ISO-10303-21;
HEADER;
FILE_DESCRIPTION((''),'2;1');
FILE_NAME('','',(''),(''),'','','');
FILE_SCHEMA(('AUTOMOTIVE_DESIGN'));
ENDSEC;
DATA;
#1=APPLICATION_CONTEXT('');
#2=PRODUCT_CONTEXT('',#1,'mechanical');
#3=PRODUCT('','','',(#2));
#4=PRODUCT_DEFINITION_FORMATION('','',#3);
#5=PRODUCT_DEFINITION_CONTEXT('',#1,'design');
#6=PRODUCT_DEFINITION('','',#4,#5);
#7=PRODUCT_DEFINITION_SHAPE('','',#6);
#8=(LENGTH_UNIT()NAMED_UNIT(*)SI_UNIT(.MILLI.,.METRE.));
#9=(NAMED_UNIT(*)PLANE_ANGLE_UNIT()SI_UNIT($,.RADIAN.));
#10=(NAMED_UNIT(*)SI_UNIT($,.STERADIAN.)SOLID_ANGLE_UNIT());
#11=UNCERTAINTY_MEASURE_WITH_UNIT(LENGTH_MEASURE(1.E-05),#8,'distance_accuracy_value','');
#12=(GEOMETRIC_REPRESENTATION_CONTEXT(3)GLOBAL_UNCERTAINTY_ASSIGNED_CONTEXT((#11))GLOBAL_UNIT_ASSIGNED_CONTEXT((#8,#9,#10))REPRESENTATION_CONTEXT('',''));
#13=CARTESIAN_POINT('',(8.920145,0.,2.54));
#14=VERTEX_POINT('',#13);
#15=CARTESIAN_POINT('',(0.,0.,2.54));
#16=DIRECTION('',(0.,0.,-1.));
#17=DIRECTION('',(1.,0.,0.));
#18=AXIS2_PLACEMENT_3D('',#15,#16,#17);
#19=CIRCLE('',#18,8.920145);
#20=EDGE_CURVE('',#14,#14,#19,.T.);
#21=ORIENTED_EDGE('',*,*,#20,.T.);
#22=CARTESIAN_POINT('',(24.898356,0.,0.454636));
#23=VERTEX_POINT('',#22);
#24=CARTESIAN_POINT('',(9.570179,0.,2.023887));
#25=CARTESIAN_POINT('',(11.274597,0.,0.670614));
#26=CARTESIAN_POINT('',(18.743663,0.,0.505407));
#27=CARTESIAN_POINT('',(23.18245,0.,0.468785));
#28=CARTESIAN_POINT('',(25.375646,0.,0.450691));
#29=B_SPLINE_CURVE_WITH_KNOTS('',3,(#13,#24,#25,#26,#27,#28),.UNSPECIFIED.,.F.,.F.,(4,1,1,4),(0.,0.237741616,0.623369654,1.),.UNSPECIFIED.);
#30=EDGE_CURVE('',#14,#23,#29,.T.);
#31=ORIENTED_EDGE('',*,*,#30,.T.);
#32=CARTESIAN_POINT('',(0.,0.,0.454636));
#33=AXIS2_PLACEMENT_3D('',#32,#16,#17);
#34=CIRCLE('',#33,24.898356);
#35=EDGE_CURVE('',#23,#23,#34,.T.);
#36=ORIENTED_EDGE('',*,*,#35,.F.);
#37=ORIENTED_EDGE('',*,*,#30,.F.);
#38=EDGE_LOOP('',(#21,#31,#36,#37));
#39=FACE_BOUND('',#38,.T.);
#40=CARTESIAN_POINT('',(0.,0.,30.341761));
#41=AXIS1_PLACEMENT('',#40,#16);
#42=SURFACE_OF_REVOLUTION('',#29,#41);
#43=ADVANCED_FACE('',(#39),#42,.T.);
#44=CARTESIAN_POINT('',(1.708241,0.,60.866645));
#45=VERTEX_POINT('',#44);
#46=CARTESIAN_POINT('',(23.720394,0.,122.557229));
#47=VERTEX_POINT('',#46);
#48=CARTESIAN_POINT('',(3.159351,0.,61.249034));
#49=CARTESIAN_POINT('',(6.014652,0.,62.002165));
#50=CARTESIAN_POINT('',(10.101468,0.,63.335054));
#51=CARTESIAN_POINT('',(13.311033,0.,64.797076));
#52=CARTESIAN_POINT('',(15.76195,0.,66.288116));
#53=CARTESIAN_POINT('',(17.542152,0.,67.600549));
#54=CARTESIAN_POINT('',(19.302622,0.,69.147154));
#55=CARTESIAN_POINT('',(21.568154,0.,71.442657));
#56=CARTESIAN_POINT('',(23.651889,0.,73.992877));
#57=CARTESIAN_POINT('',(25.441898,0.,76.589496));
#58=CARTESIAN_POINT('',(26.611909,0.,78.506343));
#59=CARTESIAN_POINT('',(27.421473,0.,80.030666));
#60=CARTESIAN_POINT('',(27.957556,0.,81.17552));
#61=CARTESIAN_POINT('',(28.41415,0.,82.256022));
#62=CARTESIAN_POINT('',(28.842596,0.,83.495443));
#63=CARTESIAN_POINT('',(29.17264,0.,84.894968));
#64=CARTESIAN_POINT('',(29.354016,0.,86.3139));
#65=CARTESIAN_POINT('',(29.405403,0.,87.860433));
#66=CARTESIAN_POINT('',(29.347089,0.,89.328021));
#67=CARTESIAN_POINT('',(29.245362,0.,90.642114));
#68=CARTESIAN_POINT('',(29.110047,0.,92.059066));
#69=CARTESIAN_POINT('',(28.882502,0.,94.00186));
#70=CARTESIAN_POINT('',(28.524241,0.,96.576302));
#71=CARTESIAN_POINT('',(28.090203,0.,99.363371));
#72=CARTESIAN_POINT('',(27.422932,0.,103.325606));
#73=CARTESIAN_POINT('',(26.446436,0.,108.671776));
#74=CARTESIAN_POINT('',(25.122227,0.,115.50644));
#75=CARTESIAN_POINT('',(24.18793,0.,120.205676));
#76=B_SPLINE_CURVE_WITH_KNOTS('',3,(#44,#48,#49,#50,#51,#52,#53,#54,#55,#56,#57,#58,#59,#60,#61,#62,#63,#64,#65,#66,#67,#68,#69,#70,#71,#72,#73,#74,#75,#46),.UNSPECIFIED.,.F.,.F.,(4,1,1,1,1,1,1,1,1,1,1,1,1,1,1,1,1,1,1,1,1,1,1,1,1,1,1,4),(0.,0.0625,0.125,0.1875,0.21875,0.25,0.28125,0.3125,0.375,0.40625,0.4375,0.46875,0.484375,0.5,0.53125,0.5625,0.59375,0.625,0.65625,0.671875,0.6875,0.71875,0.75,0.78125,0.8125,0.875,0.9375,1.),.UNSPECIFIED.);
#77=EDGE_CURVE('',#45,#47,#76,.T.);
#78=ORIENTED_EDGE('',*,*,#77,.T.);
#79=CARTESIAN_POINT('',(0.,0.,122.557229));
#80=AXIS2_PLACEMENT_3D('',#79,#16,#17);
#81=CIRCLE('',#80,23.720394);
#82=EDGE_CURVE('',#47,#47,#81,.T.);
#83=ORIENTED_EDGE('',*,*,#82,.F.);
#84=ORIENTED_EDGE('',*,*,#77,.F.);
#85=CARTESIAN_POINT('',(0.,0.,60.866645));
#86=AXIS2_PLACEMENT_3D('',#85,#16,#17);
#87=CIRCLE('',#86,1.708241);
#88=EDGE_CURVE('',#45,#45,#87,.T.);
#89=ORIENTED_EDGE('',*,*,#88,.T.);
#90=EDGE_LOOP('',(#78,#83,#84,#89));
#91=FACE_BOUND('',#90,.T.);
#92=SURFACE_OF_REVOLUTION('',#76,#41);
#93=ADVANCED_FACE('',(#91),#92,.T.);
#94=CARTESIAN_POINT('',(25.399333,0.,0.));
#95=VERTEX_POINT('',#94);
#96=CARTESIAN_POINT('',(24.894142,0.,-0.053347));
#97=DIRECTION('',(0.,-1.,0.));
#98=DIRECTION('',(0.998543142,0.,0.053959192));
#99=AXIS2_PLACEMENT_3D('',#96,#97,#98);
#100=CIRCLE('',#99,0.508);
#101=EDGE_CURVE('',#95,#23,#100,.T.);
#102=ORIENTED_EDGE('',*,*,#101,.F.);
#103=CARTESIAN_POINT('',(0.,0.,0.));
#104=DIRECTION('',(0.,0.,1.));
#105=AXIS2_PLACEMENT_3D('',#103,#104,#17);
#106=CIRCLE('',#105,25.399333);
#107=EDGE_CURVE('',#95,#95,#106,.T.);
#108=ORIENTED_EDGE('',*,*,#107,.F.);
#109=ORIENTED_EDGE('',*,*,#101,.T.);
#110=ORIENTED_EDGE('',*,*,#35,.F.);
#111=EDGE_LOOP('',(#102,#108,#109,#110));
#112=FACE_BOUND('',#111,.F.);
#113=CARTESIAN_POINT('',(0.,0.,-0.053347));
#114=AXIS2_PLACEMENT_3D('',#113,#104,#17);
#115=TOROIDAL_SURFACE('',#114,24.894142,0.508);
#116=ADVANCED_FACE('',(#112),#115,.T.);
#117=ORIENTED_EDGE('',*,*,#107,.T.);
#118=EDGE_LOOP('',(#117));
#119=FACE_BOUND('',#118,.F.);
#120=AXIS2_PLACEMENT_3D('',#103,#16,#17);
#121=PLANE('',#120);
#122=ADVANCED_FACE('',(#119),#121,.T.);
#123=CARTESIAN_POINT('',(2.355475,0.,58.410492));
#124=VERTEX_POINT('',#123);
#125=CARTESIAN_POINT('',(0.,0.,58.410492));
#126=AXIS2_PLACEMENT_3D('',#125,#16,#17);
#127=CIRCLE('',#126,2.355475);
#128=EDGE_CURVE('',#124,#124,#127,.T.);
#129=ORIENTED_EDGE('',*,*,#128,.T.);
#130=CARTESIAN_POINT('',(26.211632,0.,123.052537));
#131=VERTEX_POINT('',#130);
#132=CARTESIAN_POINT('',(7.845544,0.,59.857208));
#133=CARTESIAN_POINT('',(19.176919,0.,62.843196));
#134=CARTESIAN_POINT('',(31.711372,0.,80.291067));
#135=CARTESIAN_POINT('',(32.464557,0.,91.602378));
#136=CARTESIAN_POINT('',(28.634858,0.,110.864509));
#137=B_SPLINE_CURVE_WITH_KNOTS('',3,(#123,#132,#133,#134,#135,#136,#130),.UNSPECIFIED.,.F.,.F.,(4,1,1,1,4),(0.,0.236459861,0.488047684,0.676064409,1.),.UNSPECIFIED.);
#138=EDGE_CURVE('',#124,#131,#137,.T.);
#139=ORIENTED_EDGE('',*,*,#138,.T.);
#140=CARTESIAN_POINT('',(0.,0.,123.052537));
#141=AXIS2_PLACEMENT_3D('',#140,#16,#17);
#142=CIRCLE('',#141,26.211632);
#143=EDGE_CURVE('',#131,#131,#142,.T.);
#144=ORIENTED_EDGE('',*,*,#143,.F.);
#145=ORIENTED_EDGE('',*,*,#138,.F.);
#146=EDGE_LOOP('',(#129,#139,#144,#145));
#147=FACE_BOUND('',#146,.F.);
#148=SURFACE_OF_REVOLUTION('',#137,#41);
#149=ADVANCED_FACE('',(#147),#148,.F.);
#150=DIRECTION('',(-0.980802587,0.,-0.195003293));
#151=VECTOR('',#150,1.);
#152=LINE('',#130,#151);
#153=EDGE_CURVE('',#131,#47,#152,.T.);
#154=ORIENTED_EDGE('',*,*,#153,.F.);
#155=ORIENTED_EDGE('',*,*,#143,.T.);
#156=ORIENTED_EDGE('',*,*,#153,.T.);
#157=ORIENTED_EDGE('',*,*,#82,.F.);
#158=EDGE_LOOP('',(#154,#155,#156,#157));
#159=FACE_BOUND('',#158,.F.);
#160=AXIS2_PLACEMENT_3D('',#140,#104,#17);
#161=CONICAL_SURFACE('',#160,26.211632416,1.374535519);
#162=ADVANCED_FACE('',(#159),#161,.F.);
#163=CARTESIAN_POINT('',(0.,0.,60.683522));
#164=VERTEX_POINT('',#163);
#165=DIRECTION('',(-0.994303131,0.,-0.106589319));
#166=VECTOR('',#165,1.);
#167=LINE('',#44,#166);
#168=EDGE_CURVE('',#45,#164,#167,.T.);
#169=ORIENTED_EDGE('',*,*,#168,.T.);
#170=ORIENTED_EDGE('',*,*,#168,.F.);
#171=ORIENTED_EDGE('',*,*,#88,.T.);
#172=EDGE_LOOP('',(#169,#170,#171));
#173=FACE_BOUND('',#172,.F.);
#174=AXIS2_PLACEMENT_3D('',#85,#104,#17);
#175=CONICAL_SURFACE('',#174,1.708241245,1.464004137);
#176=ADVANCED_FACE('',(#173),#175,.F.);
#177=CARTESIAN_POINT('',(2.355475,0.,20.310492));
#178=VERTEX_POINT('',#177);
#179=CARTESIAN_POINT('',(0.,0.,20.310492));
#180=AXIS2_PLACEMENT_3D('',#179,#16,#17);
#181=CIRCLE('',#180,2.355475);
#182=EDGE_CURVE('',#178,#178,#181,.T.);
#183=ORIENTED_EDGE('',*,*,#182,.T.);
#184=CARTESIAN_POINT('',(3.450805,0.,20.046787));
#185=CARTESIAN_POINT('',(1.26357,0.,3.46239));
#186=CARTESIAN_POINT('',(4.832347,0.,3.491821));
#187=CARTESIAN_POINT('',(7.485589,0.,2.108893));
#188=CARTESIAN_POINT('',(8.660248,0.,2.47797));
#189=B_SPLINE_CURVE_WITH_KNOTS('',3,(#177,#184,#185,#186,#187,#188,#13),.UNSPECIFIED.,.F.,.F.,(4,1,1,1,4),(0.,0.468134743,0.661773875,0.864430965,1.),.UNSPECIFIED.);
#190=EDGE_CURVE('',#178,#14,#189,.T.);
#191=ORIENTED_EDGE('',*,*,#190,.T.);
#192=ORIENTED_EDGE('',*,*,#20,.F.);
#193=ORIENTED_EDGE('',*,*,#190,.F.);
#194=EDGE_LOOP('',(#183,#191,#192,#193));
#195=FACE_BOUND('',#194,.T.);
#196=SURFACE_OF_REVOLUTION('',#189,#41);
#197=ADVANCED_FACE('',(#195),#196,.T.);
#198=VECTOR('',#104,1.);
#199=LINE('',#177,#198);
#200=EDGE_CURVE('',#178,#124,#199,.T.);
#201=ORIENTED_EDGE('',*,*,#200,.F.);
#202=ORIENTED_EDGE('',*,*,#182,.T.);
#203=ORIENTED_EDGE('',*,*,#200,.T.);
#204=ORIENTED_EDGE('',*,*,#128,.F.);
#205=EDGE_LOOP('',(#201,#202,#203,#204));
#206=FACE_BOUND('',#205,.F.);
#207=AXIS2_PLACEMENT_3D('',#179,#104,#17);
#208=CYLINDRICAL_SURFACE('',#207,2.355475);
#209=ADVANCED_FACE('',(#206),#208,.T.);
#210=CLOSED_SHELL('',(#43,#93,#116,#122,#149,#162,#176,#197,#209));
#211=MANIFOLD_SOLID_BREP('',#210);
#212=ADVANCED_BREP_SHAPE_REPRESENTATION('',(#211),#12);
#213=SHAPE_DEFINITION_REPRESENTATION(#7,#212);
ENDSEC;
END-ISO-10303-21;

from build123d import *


# Not quite as in the source:
# - a fillet or chamfer that OpenCascade refuses, or shapes differently, is made with other operations: its cross-section is extruded or revolved along the edge and cut away or added
# - the dataset's text gives a spline's control points without its knots; the knots are read off the source's solid


with BuildPart() as f1:
    # F0 (on Front) → F1 (revolve)
    with BuildSketch(Plane.XZ):
        with BuildLine():
            Line((0, 60.6835215705), (0, 0))
            Line((0, 0), (25.4, 0))
            Line((25.4, 0), (25.3756456077, 0.4506908008))
            add(Edge.make_bspline(
                [(8.920145147, 2.54), (9.5701787059, 2.0238867744), (11.2745971474, 0.6706137203), (18.7436626828, 0.5054067019), (23.1824497694, 0.4687853418), (25.3756456077, 0.4506908008)],
                knots=[0, 0, 0, 0, 0.2377416161, 0.6233696542, 1, 1, 1, 1], degree=3))
            add(Edge.make_bspline(
                [(2.3554746294, 20.3104917891), (3.450805073, 20.0467872615), (1.263569687, 3.4623897189), (4.8323470292, 3.4918212397), (7.4855892325, 2.1088926231), (8.6602480308, 2.4779700202), (8.920145147, 2.54)],
                knots=[0, 0, 0, 0, 0.4681347427, 0.6617738747, 0.8644309645, 1, 1, 1, 1], degree=3))
            Line((2.3554746294, 20.3104917891), (2.3554746294, 58.4104917891))
            add(Edge.make_bspline(
                [(2.3554746294, 58.4104917891), (7.8455436813, 59.8572076751), (19.1769192471, 62.8431958086), (31.7113717173, 80.2910669105), (32.4645570364, 91.6023780933), (28.6348578454, 110.8645085553), (26.2116324157, 123.0525374413)],
                knots=[0, 0, 0, 0, 0.2364598605, 0.4880476839, 0.6760644089, 1, 1, 1, 1], degree=3))
            Line((26.2116324157, 123.0525374413), (23.7203938435, 122.5572290763))
            add(Edge.make_bspline(
                [(1.7082412452, 60.8666450715), (3.1593514466, 61.249034466), (6.0146524571, 62.002165491), (10.1014675931, 63.3350542415), (13.3110327941, 64.7970762789), (15.761949944, 66.2881158141), (17.5421523146, 67.6005493036), (19.3026215128, 69.147153639), (21.5681543069, 71.4426571884), (23.6518886123, 73.9928770332), (25.4418980822, 76.5894956432), (26.6119088932, 78.5063430334), (27.421473176, 80.0306656667), (27.9575559056, 81.1755198233), (28.4141500288, 82.2560217519), (28.8425959179, 83.4954427212), (29.1726397755, 84.8949684895), (29.3540159051, 86.3139000071), (29.4054034162, 87.8604329646), (29.34708925, 89.32802144), (29.2453624673, 90.6421135155), (29.1100473168, 92.0590660568), (28.882501846, 94.001859929), (28.5242406922, 96.5763017262), (28.0902028857, 99.3633710421), (27.4229321443, 103.3256055084), (26.4464362239, 108.6717758599), (25.1222270624, 115.5064401591), (24.1879299634, 120.205675785), (23.7203938435, 122.5572290763)],
                knots=[0, 0, 0, 0, 0.0625, 0.125, 0.1875, 0.21875, 0.25, 0.28125, 0.3125, 0.375, 0.40625, 0.4375, 0.46875, 0.484375, 0.5, 0.53125, 0.5625, 0.59375, 0.625, 0.65625, 0.671875, 0.6875, 0.71875, 0.75, 0.78125, 0.8125, 0.875, 0.9375, 1, 1, 1, 1], degree=3))
            Line((1.7082412452, 60.8666450715), (0, 60.6835215705))
        make_face()
    revolve(axis=Axis((0, 0, 30.3417607852), (0, 0, -1)))

    # F2: fillet of radius 0.508 on 1 edges, made by hand

    # F2_s1 → F2_t2 (revolve, cut)
    with BuildSketch(Plane.XZ):
        with BuildLine():
            ThreePointArc((25.4014014901, -0.0259353087), (25.2450528093, 0.3139752222), (24.8983560519, 0.4546359394))
            ThreePointArc((24.8983560519, 0.4546359394), (25.137000807, 0.4526606135), (25.3756456077, 0.4506908008))
            Line((25.3756456077, 0.4506908008), (25.4014014901, -0.0259353087))
        make_face()
    revolve(axis=Axis((0, 0, 0.4506908008), (0, 0, -1)), mode=Mode.SUBTRACT)


solid = f1.part
